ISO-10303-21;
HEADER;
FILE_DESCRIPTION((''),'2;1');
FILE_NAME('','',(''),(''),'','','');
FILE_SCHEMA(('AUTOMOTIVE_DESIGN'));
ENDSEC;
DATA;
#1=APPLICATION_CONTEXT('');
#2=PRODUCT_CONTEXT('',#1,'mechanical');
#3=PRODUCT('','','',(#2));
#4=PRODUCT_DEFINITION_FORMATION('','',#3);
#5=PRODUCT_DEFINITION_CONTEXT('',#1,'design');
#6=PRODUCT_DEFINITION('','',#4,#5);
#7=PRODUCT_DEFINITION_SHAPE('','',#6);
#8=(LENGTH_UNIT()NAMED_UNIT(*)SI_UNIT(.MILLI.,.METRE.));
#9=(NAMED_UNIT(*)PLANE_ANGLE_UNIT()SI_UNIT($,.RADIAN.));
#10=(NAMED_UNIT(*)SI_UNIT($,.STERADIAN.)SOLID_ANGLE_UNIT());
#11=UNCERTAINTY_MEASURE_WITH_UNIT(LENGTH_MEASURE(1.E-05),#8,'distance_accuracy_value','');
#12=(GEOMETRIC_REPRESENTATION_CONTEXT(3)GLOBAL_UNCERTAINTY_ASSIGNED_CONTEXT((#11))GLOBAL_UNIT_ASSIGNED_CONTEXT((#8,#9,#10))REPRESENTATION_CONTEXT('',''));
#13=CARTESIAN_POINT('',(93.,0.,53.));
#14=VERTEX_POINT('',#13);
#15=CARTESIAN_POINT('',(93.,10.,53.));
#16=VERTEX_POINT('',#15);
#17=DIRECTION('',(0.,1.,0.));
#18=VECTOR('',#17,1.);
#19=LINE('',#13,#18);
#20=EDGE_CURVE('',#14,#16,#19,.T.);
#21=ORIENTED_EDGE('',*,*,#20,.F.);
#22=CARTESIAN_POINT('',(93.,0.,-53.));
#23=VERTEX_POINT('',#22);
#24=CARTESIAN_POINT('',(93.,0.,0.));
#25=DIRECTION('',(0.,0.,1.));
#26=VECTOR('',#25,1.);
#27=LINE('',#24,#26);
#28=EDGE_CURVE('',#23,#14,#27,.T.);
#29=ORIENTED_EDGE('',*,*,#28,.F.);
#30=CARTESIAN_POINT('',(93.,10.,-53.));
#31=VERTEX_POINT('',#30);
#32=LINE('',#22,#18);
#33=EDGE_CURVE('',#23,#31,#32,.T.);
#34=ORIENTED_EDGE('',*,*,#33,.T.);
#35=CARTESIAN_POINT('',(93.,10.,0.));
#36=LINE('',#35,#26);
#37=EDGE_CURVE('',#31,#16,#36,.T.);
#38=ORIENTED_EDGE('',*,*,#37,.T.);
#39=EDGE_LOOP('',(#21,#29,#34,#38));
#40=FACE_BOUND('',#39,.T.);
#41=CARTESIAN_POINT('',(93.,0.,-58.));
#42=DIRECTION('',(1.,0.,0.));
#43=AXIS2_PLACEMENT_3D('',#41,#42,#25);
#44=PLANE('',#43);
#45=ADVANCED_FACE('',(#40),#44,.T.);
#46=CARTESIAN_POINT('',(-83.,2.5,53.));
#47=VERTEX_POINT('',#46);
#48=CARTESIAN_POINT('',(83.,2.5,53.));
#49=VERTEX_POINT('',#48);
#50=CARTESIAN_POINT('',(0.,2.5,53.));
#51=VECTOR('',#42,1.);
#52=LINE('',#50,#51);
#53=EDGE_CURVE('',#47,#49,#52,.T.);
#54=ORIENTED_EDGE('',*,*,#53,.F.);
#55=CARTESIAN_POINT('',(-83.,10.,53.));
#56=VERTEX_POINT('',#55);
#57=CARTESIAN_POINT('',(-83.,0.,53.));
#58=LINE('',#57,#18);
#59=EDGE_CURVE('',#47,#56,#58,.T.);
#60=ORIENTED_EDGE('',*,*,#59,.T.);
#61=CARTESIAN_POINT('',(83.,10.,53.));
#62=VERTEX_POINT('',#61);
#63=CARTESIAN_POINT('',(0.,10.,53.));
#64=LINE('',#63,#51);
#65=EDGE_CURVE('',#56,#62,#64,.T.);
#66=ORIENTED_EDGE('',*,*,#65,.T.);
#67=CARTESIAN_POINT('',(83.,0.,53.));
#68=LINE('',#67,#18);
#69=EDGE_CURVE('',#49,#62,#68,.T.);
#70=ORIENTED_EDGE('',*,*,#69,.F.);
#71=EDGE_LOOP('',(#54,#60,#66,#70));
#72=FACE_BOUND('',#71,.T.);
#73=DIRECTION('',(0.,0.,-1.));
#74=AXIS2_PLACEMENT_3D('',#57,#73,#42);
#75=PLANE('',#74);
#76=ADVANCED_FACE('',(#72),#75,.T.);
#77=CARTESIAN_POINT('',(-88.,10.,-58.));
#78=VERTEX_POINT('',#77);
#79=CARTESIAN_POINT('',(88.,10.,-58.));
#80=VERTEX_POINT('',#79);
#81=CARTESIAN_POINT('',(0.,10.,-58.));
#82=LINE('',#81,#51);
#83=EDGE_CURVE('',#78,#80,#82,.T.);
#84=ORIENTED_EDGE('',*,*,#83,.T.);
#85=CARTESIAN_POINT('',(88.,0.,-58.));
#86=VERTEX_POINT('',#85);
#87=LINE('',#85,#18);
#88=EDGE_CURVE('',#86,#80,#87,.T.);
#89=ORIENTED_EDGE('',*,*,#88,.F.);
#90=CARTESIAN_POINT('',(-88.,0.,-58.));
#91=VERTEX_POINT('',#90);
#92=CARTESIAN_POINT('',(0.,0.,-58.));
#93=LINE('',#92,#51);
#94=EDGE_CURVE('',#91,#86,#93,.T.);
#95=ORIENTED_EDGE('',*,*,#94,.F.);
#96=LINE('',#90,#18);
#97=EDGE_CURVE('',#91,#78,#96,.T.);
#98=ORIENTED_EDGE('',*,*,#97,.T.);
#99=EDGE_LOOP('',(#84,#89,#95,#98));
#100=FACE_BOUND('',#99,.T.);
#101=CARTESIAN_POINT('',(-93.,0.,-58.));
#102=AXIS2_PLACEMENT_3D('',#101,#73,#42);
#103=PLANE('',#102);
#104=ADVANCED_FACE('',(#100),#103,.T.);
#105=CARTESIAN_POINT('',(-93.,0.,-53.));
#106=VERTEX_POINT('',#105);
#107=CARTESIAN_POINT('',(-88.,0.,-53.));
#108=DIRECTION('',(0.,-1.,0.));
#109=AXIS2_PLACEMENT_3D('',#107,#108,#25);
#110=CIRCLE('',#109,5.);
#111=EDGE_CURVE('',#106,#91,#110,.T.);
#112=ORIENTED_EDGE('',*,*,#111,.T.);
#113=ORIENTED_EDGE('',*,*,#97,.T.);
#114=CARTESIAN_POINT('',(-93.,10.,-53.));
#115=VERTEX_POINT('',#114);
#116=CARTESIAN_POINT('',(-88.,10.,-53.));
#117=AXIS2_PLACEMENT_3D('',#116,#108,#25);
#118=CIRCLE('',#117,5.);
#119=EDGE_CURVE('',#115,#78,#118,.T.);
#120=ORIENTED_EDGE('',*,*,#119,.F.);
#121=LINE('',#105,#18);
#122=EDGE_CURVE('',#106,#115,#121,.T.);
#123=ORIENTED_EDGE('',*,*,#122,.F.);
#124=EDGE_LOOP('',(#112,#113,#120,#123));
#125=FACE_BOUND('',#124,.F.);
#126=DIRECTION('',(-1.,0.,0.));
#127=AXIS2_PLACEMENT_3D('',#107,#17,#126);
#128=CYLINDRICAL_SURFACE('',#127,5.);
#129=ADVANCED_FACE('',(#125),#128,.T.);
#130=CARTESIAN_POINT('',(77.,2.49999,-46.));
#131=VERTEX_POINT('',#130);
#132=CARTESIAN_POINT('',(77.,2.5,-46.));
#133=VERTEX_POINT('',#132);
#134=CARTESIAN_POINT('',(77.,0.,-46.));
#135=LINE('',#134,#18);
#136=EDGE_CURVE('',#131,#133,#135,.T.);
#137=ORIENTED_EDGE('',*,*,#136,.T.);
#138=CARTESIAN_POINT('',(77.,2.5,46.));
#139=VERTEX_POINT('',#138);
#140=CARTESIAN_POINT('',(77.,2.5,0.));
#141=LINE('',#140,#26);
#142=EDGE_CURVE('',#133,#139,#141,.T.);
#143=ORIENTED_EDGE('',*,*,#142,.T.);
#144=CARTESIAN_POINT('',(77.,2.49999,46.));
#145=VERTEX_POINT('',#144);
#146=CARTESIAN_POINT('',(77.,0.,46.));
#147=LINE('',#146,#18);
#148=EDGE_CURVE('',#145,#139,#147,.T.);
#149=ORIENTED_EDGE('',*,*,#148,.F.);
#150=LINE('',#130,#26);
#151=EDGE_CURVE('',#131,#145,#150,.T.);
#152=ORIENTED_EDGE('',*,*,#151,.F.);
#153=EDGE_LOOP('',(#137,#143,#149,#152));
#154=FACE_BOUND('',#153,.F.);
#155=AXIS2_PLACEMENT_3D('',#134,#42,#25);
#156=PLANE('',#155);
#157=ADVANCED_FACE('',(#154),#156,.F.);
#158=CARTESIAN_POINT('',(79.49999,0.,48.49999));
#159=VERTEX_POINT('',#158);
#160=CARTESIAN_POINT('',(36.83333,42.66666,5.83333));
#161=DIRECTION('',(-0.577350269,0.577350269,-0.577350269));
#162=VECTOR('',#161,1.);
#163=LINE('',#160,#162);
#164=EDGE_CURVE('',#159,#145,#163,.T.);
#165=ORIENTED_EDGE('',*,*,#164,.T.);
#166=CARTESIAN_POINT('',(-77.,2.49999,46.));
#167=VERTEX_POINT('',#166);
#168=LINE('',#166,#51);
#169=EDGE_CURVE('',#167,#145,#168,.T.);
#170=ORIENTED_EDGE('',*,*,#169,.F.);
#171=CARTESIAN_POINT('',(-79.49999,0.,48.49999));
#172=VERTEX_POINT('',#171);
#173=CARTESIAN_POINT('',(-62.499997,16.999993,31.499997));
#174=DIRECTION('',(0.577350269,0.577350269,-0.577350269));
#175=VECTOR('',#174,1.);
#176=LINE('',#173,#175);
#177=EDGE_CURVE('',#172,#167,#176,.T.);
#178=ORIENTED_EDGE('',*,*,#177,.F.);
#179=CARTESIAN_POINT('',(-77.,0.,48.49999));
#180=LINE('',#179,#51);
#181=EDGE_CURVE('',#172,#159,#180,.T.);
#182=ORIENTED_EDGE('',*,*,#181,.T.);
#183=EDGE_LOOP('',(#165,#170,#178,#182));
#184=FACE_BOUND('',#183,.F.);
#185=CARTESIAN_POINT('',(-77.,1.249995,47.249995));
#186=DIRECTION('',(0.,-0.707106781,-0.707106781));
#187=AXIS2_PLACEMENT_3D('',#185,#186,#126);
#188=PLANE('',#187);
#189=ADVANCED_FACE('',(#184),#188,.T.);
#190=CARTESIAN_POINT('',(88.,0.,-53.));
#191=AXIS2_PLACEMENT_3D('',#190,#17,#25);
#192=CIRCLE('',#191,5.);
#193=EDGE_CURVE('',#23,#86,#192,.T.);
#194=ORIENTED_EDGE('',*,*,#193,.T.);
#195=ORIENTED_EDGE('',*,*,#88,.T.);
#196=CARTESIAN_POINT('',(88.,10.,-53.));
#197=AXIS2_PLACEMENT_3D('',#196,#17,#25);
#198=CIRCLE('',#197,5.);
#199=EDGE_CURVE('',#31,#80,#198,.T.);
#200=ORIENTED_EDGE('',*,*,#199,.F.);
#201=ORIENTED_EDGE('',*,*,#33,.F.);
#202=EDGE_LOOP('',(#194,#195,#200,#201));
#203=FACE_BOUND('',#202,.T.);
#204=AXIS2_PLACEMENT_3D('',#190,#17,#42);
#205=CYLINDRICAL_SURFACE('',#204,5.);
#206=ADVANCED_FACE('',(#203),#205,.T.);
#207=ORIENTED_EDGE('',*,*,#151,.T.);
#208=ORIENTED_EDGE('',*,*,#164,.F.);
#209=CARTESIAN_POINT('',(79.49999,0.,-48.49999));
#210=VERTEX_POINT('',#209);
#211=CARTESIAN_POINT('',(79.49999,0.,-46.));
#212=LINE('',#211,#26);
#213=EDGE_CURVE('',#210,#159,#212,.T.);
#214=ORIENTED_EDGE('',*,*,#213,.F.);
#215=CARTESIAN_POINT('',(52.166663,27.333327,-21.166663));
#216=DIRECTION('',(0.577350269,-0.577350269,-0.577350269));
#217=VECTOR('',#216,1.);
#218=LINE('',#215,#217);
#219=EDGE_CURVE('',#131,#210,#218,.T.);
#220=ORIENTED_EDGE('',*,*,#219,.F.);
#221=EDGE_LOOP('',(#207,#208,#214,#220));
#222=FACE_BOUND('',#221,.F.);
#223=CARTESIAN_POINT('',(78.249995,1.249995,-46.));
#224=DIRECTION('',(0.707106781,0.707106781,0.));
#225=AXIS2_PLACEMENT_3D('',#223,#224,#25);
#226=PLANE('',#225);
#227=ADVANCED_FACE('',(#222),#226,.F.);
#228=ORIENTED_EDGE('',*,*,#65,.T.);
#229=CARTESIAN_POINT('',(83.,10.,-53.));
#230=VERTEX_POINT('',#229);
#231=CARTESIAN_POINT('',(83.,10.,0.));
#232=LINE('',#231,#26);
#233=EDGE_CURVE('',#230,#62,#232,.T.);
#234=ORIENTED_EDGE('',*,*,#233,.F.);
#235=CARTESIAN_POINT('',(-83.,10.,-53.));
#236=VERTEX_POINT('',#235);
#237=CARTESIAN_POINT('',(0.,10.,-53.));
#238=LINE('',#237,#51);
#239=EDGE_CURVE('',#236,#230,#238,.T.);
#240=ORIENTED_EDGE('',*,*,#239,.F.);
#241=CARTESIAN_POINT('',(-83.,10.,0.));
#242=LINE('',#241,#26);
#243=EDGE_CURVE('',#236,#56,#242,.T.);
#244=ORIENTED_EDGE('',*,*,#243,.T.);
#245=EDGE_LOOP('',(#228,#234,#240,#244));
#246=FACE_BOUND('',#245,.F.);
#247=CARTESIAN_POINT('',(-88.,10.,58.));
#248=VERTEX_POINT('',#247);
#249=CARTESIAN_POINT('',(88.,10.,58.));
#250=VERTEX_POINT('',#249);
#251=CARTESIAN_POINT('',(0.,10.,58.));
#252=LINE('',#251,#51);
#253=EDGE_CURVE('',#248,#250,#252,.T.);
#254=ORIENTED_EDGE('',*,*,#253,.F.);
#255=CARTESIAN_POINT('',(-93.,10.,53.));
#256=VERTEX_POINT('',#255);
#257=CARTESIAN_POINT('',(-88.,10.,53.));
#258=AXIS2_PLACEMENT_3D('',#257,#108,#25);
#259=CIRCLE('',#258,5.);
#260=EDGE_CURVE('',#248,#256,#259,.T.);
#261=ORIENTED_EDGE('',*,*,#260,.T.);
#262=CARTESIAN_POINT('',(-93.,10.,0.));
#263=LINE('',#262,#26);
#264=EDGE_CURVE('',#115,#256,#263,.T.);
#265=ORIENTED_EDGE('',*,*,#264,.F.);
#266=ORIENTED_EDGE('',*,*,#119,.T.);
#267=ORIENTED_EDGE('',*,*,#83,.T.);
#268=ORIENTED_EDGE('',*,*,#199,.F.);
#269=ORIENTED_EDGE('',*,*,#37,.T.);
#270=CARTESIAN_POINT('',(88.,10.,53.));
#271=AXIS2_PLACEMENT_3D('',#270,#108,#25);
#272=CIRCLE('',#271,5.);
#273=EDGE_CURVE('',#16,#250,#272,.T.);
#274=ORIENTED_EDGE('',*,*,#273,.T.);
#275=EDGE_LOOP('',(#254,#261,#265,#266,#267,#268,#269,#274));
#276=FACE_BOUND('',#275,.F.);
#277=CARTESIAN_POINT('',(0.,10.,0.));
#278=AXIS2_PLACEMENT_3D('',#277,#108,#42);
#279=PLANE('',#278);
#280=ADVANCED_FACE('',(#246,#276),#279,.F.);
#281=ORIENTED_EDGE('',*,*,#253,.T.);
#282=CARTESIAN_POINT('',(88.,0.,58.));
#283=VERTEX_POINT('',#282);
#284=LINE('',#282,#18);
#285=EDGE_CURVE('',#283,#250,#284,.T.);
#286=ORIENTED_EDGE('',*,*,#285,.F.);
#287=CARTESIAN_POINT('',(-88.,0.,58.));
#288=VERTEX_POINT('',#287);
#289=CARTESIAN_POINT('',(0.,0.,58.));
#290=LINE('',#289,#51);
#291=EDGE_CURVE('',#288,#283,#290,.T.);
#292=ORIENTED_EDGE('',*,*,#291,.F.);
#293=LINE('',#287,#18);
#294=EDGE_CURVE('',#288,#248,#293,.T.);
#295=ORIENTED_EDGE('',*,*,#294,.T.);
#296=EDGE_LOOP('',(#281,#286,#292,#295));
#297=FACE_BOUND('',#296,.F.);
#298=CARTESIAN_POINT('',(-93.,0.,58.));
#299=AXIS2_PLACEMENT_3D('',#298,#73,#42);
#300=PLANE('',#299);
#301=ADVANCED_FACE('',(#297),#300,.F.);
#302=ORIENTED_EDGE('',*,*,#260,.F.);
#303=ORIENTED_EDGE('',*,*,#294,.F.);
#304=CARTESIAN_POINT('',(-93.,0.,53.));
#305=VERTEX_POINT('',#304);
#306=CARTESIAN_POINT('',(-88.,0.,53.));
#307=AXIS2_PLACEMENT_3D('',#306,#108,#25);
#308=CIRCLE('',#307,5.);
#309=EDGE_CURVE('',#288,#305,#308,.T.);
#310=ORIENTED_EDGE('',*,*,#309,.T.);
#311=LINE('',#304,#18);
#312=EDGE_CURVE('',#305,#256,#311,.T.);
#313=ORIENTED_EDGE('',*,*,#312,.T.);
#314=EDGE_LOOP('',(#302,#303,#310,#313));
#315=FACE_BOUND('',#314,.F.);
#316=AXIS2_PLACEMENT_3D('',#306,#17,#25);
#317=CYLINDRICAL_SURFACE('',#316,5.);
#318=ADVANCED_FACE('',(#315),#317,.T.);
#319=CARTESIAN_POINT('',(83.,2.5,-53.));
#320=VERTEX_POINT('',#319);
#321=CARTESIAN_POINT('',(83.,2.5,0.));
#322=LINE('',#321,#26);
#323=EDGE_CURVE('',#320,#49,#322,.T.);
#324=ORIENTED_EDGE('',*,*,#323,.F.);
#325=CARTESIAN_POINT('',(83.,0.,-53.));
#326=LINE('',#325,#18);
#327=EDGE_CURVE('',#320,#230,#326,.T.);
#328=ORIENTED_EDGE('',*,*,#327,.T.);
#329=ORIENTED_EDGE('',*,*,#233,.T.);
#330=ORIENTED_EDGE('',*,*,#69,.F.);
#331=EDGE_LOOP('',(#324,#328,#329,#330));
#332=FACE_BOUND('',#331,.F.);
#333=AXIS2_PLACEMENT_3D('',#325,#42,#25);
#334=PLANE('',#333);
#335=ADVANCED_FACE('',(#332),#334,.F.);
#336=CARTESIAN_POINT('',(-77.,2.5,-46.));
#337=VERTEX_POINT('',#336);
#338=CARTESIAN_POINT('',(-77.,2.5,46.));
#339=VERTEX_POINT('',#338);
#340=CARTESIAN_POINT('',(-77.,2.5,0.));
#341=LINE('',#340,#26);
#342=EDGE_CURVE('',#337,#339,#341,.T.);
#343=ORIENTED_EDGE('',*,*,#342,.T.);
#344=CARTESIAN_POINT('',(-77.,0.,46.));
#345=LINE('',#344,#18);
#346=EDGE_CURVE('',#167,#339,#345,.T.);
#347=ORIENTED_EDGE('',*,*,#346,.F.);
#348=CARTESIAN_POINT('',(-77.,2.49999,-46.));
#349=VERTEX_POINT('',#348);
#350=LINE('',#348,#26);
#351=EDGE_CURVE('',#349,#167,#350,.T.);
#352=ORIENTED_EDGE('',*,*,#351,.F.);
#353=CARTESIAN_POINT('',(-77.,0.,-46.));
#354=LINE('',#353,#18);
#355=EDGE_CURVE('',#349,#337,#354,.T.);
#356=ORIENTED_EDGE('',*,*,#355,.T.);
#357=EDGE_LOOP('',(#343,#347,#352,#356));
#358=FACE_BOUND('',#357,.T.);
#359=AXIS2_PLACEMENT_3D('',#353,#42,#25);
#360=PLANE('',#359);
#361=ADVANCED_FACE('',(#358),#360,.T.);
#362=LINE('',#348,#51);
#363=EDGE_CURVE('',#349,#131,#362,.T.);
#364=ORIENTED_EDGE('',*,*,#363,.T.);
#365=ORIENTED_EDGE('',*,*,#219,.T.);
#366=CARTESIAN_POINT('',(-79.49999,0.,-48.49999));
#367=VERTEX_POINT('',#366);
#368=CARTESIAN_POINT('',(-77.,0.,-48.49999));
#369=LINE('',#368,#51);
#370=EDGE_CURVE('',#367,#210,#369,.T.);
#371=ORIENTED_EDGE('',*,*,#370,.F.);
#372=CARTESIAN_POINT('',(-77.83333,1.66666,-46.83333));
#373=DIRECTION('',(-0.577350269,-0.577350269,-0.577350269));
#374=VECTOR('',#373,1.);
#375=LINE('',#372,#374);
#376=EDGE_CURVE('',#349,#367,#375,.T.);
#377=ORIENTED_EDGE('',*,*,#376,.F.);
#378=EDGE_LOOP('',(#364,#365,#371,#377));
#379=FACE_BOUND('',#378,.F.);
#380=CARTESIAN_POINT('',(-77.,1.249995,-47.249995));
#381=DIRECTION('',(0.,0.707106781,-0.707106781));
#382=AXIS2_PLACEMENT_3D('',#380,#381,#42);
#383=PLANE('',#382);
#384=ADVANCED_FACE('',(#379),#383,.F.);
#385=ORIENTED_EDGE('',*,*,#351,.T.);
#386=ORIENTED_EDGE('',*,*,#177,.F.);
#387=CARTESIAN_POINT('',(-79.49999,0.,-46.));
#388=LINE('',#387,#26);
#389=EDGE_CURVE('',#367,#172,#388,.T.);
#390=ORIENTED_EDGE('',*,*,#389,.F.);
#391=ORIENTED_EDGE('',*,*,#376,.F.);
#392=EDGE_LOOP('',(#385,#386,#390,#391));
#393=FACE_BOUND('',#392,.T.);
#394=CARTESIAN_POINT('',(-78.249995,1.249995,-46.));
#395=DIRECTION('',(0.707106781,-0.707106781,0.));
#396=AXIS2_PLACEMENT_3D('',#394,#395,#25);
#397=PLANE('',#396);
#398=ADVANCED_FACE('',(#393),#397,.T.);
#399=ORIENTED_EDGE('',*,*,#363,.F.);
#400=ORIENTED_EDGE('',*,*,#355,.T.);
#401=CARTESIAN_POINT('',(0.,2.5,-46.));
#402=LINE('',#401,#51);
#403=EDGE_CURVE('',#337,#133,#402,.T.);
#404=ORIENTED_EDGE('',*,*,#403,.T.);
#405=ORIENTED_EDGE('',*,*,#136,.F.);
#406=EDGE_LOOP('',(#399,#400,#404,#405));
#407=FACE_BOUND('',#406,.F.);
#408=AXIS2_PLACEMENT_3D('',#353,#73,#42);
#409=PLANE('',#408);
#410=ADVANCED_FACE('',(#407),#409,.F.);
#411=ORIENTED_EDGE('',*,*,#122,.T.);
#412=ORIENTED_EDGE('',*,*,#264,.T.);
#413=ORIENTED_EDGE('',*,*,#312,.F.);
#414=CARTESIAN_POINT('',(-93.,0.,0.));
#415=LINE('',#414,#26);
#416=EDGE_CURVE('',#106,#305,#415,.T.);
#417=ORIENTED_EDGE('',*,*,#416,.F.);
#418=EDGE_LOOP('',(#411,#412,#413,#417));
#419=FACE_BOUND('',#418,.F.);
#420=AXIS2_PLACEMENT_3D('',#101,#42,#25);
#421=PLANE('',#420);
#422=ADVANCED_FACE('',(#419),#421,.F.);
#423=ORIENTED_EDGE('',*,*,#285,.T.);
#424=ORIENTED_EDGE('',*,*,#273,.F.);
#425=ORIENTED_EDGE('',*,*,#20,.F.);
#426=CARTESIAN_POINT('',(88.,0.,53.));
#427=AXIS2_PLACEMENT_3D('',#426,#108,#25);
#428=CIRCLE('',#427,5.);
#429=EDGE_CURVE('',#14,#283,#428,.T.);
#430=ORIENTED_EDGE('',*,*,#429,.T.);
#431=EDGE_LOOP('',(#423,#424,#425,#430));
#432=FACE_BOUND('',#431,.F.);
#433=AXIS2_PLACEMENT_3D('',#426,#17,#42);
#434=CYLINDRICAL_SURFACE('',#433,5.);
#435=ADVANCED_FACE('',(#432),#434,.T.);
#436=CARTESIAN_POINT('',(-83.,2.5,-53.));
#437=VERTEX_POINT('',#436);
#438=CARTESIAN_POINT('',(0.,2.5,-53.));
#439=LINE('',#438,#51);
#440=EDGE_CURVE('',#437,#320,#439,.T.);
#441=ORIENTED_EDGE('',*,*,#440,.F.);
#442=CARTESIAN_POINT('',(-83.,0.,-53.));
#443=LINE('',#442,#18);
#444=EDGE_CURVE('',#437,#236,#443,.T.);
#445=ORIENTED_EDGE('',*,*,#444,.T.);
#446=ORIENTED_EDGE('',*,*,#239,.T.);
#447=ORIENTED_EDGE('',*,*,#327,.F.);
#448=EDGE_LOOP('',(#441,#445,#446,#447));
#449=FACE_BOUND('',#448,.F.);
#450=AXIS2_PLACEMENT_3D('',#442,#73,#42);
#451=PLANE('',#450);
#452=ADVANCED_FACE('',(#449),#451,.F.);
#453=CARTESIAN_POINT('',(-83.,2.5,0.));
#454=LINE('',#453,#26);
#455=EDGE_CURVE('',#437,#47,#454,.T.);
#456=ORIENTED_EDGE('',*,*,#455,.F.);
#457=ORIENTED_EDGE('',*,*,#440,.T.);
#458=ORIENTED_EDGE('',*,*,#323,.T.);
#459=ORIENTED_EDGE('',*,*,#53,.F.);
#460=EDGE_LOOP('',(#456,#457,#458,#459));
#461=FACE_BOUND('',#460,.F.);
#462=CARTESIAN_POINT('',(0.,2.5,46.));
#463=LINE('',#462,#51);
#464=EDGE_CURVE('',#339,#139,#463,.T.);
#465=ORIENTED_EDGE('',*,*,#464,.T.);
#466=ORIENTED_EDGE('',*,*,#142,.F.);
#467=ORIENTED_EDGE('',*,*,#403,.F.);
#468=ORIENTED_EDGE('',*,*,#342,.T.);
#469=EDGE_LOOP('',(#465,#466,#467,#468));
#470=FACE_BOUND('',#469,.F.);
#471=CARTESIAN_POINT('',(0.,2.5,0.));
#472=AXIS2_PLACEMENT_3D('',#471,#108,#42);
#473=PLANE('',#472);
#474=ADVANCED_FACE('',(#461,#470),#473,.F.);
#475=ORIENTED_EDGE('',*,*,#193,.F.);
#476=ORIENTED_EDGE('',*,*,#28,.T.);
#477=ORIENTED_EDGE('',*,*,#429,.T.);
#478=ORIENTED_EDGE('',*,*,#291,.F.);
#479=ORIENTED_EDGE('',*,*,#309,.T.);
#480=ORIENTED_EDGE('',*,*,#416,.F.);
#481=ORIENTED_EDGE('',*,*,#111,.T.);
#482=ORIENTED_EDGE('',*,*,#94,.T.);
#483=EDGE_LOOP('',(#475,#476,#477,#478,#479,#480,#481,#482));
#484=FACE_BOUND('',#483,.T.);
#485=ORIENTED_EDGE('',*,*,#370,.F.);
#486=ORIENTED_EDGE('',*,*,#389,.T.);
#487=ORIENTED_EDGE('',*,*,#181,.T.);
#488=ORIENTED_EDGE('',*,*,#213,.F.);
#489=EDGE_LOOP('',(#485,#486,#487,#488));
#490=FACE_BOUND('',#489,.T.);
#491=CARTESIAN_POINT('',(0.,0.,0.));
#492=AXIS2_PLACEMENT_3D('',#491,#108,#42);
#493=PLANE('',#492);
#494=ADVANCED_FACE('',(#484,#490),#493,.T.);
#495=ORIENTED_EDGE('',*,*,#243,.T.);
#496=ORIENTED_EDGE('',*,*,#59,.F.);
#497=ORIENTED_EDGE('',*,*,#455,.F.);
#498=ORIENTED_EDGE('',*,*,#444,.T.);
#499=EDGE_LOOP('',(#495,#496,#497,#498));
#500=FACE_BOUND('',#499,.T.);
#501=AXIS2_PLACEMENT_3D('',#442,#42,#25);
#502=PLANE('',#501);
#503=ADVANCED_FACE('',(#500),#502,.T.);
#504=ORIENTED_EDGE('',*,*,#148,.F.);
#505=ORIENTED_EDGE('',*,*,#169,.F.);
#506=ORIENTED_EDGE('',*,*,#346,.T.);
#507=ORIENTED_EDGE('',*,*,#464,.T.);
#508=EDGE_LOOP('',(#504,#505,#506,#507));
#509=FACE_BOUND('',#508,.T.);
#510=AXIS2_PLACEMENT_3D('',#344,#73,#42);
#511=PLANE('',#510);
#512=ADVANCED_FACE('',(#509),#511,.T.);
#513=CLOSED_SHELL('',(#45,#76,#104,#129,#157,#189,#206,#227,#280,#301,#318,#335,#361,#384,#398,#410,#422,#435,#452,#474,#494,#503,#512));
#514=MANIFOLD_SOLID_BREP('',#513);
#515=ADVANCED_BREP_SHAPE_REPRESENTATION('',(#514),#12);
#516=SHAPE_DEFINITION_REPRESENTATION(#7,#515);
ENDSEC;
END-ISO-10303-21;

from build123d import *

# Parameters (mm, degrees)
F0_W     = 186
F0_H     = 116
F0_W_2   = 166
F0_H_2   = 106
F1_DEPTH = 10
F0_W_3   = 164
F0_H_3   = 102
F2_DEPTH = 2.5
F0_W_4   = 154
F0_H_4   = 92
F3_DEPTH = 2.5
F4_SIZE  = 2.49999
F5_R     = 5


# Not quite as in the source:
# - a fillet or chamfer is up to 0.001 mm smaller than in the source, because OpenCascade refuses the exact size


with BuildPart() as f1:
    # F0 (on Front) → F1 (new body)
    with BuildSketch(Plane.XZ):
        Rectangle(F0_W, F0_H)
        Rectangle(F0_W_2, F0_H_2, mode=Mode.SUBTRACT)
    extrude(amount=-F1_DEPTH)

    # F0 (on Front) → F2 (join)
    with BuildSketch(Plane.XZ):
        Rectangle(F0_W_2, F0_H_2)
        Rectangle(F0_W_3, F0_H_3, mode=Mode.SUBTRACT)
    extrude(amount=-F2_DEPTH)

    # F0 (on Front) → F3 (join)
    with BuildSketch(Plane.XZ):
        Rectangle(F0_W_3, F0_H_3)
        Rectangle(F0_W_4, F0_H_4, mode=Mode.SUBTRACT)
    extrude(amount=-F3_DEPTH)

    # F4 (size 2.5 in the source; OpenCascade refuses exactly that, so slightly less here)
    f4_edges = [f1.edges().sort_by_distance(p)[0] for p in [
        (0, 0, 46),
        (-77, 0, 0),
        (0, 0, -46),
        (77, 0, 0),
    ]]
    chamfer(f4_edges, length=F4_SIZE)

    # F5
    f5_edges = [f1.edges().sort_by_distance(p)[0] for p in [
        (-93, 5, 58),
        (-93, 5, -58),
        (93, 5, -58),
        (93, 5, 58),
    ]]
    fillet(f5_edges, radius=F5_R)


solid = f1.part
